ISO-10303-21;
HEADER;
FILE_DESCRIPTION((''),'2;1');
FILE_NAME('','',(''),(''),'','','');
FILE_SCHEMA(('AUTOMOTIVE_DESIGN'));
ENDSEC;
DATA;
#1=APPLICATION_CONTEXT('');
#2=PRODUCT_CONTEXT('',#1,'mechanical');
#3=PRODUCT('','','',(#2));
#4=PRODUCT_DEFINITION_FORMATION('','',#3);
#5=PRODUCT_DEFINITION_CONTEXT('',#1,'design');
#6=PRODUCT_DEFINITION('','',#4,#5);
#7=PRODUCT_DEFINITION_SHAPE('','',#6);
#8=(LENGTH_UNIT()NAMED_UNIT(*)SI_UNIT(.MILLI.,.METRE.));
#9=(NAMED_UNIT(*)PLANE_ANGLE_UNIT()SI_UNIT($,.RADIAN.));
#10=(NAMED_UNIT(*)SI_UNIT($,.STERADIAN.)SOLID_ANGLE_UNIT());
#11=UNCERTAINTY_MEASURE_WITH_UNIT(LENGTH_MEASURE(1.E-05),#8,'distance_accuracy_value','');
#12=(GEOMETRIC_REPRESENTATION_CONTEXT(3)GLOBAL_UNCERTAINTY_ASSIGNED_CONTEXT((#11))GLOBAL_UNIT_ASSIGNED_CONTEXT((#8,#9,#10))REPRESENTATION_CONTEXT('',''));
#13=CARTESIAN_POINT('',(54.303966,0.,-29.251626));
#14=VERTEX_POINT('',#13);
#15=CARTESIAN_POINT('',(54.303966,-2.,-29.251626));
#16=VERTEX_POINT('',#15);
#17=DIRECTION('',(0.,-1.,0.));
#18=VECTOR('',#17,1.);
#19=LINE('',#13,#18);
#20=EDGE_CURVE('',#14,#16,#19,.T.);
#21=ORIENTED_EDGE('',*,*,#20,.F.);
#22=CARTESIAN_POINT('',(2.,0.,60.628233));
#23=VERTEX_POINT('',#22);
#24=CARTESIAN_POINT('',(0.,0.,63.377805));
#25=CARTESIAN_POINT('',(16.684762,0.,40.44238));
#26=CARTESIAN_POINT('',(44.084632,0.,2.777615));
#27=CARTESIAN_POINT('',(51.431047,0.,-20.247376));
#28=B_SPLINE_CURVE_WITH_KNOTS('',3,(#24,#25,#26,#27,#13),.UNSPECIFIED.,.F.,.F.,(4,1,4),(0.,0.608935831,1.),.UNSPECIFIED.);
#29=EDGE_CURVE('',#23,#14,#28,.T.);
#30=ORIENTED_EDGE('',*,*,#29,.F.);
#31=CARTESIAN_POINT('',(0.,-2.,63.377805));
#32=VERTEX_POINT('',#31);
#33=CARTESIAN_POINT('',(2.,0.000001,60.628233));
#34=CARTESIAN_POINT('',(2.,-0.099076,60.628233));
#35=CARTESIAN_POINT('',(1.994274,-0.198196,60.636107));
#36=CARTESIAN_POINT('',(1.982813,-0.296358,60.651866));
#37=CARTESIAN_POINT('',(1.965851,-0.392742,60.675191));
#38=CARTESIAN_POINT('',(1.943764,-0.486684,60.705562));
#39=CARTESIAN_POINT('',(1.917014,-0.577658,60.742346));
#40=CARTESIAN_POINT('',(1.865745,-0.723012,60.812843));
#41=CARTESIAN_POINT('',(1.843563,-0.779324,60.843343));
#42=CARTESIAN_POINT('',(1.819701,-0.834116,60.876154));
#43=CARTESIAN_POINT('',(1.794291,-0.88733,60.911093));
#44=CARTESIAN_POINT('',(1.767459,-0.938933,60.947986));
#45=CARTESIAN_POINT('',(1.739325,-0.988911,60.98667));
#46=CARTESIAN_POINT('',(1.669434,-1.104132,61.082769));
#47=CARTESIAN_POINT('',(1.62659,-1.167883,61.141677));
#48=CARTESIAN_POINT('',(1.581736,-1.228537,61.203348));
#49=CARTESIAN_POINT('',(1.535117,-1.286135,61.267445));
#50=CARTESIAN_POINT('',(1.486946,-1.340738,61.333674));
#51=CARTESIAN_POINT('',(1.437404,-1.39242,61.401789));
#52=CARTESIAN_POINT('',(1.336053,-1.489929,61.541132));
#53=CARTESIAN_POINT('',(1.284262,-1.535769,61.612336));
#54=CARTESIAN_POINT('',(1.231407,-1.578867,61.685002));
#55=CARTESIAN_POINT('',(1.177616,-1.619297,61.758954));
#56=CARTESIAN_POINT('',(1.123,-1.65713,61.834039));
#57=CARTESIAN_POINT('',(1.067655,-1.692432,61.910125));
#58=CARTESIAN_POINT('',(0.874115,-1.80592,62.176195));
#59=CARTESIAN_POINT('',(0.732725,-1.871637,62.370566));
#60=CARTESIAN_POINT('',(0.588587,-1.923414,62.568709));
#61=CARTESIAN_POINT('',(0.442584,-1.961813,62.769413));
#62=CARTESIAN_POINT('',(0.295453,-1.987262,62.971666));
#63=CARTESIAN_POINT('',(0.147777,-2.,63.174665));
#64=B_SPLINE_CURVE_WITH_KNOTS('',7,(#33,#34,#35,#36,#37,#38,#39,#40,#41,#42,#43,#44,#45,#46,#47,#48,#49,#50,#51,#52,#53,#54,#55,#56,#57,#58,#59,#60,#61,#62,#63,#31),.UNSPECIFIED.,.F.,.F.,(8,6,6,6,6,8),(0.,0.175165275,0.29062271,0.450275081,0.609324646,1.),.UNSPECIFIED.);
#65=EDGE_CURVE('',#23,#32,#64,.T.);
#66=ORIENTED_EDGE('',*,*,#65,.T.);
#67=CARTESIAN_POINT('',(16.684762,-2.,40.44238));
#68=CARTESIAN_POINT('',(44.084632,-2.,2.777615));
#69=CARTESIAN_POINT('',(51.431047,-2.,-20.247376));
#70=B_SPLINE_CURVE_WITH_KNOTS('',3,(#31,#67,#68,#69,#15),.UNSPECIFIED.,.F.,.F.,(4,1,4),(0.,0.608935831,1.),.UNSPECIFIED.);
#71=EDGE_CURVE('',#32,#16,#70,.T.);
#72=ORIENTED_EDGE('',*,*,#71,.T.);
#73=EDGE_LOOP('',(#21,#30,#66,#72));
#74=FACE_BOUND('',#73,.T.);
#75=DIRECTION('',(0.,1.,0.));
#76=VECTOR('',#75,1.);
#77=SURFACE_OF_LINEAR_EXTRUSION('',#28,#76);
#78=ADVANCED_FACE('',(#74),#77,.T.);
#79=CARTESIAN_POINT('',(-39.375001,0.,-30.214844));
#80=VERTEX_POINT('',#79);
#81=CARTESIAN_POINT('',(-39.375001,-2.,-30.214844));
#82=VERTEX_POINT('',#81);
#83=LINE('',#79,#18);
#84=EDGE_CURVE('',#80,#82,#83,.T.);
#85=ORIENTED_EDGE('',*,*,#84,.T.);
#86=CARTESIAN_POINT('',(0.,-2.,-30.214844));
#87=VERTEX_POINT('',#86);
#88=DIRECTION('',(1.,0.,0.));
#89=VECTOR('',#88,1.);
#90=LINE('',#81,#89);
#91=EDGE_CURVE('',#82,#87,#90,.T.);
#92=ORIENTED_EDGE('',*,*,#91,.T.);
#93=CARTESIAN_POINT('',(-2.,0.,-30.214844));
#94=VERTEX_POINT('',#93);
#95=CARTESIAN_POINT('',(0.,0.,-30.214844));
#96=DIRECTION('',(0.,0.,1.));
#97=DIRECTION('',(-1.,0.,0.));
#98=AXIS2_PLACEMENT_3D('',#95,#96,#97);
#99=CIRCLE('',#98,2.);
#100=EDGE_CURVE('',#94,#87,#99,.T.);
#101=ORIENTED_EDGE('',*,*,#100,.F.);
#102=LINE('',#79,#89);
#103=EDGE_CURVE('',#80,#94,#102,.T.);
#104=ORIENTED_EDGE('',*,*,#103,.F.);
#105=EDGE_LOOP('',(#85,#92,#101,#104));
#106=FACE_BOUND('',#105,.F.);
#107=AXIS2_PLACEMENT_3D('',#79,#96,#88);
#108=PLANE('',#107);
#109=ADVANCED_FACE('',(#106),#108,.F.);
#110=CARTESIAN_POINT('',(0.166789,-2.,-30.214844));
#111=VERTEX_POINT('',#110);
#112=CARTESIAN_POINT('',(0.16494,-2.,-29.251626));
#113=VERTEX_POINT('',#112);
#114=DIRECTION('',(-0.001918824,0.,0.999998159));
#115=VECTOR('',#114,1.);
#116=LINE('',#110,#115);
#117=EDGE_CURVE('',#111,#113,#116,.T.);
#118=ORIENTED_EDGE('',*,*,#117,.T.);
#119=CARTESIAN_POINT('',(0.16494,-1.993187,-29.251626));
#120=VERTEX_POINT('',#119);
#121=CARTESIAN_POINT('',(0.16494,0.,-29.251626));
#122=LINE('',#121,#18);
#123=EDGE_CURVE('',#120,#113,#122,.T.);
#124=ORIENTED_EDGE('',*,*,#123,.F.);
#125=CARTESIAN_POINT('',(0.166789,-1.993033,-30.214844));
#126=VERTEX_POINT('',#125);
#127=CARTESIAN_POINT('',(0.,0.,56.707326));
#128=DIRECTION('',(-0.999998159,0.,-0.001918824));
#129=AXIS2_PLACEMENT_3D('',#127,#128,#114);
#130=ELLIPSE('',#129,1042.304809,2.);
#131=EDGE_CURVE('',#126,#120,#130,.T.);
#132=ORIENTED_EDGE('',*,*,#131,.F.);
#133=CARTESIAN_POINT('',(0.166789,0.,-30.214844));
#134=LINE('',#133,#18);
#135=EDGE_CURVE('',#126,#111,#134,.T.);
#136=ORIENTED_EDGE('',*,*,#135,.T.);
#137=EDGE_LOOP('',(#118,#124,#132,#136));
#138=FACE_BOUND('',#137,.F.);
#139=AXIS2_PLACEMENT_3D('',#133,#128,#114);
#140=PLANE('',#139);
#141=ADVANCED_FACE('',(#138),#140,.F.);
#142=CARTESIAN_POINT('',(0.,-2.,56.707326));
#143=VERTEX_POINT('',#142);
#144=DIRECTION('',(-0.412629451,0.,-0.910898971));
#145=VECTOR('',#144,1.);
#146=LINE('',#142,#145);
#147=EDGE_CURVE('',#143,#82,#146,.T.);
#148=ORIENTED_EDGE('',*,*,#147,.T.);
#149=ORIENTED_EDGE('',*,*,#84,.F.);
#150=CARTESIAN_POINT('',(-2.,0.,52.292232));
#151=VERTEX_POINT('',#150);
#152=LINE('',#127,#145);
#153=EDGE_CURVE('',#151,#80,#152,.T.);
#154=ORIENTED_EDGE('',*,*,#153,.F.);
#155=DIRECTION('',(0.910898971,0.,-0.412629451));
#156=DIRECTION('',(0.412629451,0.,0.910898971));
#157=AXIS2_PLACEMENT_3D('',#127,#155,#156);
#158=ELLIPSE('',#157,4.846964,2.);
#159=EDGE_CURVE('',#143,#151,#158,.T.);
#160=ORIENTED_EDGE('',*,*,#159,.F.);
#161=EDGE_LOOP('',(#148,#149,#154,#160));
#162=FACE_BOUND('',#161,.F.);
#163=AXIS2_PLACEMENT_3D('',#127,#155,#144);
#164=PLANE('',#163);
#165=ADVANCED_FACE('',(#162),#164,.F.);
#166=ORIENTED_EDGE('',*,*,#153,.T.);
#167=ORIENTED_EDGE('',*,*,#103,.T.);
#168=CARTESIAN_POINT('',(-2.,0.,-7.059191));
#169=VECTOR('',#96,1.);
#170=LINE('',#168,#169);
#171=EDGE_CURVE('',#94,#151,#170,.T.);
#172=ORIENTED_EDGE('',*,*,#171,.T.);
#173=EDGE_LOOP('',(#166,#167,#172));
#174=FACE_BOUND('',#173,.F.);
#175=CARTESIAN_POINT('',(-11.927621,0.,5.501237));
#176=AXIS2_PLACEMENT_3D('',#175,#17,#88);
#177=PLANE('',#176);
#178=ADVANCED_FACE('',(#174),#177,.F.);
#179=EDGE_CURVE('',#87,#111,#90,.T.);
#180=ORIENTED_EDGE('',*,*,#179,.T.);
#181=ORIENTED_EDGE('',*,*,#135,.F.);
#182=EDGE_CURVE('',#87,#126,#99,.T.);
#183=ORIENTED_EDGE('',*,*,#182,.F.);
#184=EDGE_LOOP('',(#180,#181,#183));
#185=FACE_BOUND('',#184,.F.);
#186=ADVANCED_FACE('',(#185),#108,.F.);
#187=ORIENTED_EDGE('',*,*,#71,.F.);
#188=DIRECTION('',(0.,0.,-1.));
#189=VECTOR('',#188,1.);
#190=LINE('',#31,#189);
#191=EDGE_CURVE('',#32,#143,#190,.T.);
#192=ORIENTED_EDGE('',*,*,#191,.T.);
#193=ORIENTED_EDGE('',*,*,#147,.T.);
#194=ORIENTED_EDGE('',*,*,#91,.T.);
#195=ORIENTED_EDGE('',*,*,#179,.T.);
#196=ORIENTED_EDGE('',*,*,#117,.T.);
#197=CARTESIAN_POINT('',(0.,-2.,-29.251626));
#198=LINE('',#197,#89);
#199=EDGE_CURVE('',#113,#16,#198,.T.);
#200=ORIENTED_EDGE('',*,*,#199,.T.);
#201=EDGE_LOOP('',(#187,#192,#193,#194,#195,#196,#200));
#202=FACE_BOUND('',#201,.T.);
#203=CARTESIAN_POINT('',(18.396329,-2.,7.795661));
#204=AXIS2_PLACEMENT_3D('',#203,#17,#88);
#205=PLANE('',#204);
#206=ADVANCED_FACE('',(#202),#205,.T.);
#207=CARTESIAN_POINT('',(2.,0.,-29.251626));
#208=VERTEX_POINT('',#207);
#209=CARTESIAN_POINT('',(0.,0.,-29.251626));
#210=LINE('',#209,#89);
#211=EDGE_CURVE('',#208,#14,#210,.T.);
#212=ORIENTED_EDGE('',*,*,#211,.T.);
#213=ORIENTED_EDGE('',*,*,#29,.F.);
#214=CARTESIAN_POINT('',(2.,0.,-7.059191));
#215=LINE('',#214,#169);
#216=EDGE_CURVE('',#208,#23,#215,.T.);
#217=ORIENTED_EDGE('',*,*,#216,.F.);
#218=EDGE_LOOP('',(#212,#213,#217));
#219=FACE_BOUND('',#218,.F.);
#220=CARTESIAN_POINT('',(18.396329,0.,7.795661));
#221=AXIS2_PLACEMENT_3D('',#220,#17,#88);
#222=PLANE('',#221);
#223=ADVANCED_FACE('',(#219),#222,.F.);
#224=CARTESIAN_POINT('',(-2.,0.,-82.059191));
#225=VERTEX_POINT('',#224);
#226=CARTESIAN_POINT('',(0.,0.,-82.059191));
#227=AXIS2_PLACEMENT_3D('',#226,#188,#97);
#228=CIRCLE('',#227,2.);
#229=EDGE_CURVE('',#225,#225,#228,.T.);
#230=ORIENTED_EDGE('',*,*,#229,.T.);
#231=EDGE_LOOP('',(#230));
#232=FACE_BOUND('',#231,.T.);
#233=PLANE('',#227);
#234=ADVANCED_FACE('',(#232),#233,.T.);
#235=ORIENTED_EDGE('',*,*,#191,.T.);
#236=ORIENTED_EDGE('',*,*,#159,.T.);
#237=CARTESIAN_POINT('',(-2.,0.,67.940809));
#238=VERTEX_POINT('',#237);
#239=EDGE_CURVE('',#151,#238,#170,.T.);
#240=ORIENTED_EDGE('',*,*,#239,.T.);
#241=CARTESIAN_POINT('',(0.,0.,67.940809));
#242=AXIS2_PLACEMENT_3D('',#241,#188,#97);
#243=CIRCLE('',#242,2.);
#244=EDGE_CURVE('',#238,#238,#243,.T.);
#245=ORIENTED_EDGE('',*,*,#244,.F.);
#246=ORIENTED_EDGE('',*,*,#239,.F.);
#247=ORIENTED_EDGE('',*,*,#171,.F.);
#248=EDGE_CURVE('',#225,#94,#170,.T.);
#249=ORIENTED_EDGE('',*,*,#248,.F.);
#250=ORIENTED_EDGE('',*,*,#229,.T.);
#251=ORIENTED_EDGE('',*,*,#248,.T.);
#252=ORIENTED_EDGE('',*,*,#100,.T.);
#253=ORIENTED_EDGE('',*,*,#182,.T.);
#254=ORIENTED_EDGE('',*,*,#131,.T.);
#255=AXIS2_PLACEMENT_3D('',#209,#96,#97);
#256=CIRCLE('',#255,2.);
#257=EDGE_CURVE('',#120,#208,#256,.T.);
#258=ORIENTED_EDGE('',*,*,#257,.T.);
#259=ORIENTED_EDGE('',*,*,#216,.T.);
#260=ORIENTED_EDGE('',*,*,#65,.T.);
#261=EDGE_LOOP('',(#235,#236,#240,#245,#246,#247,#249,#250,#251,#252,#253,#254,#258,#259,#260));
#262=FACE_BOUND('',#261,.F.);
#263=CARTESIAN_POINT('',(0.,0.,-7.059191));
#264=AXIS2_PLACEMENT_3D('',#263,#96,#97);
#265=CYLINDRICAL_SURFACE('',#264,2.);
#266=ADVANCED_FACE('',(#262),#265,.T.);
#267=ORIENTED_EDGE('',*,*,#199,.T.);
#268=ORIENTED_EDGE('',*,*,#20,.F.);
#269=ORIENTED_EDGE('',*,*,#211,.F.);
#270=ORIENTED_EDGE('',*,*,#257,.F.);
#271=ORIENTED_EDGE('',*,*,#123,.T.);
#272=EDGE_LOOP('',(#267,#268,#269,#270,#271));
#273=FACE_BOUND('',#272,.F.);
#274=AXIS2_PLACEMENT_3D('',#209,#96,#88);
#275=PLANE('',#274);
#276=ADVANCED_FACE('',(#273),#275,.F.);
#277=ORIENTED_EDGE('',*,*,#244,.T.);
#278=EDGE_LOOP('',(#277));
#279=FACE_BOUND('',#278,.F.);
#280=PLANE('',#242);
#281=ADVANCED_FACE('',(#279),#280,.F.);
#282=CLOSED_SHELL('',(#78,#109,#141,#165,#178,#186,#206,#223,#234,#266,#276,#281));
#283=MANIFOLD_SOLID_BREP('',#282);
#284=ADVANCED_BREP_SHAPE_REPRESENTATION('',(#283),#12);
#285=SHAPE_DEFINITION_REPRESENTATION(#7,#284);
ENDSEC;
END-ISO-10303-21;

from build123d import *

# Parameters (mm, degrees)
F1_W     = 2
F1_H     = 150
F5_DEPTH = 2
F7_DEPTH = 2


# Not quite as in the source:
# - the program builds the solid bodies; features that only make, move or delete a surface that nothing else refers to are left out


with BuildPart() as f4:
    # F1 (on Front) → F4 (revolve)
    with BuildSketch(Plane.XZ):
        with Locations((-1, -7.0591911674)):
            Rectangle(F1_W, F1_H)
    revolve(axis=Axis((0, 0, 16.0941202193), (0, 0, -1)))

    # F0 (on Front) → F5 (join)
    with BuildSketch(Plane.XZ):
        with BuildLine():
            Line((0, 63.3778050542), (0, -29.2516257614))
            Line((0, -29.2516257614), (54.3039664626, -29.2516257614))
            add(Edge.make_bspline(
                [(0, 63.3778050542), (16.6847622445, 40.4423802167), (44.0846316514, 2.7776154372), (51.4310467474, -20.2473764435), (54.3039664626, -29.2516257614)],
                knots=[0, 0, 0, 0, 0.6089358309, 1, 1, 1, 1], degree=3))
        make_face()
    extrude(amount=F5_DEPTH)

    # F2 (on Front) → F7 (join)
    with BuildSketch(Plane.XZ):
        Polygon((0.1667886972, -30.2148442715), (0, 56.7073263228), (-39.3750006333, -30.2148442715), align=None)
    extrude(amount=F7_DEPTH)


solid = f4.part
